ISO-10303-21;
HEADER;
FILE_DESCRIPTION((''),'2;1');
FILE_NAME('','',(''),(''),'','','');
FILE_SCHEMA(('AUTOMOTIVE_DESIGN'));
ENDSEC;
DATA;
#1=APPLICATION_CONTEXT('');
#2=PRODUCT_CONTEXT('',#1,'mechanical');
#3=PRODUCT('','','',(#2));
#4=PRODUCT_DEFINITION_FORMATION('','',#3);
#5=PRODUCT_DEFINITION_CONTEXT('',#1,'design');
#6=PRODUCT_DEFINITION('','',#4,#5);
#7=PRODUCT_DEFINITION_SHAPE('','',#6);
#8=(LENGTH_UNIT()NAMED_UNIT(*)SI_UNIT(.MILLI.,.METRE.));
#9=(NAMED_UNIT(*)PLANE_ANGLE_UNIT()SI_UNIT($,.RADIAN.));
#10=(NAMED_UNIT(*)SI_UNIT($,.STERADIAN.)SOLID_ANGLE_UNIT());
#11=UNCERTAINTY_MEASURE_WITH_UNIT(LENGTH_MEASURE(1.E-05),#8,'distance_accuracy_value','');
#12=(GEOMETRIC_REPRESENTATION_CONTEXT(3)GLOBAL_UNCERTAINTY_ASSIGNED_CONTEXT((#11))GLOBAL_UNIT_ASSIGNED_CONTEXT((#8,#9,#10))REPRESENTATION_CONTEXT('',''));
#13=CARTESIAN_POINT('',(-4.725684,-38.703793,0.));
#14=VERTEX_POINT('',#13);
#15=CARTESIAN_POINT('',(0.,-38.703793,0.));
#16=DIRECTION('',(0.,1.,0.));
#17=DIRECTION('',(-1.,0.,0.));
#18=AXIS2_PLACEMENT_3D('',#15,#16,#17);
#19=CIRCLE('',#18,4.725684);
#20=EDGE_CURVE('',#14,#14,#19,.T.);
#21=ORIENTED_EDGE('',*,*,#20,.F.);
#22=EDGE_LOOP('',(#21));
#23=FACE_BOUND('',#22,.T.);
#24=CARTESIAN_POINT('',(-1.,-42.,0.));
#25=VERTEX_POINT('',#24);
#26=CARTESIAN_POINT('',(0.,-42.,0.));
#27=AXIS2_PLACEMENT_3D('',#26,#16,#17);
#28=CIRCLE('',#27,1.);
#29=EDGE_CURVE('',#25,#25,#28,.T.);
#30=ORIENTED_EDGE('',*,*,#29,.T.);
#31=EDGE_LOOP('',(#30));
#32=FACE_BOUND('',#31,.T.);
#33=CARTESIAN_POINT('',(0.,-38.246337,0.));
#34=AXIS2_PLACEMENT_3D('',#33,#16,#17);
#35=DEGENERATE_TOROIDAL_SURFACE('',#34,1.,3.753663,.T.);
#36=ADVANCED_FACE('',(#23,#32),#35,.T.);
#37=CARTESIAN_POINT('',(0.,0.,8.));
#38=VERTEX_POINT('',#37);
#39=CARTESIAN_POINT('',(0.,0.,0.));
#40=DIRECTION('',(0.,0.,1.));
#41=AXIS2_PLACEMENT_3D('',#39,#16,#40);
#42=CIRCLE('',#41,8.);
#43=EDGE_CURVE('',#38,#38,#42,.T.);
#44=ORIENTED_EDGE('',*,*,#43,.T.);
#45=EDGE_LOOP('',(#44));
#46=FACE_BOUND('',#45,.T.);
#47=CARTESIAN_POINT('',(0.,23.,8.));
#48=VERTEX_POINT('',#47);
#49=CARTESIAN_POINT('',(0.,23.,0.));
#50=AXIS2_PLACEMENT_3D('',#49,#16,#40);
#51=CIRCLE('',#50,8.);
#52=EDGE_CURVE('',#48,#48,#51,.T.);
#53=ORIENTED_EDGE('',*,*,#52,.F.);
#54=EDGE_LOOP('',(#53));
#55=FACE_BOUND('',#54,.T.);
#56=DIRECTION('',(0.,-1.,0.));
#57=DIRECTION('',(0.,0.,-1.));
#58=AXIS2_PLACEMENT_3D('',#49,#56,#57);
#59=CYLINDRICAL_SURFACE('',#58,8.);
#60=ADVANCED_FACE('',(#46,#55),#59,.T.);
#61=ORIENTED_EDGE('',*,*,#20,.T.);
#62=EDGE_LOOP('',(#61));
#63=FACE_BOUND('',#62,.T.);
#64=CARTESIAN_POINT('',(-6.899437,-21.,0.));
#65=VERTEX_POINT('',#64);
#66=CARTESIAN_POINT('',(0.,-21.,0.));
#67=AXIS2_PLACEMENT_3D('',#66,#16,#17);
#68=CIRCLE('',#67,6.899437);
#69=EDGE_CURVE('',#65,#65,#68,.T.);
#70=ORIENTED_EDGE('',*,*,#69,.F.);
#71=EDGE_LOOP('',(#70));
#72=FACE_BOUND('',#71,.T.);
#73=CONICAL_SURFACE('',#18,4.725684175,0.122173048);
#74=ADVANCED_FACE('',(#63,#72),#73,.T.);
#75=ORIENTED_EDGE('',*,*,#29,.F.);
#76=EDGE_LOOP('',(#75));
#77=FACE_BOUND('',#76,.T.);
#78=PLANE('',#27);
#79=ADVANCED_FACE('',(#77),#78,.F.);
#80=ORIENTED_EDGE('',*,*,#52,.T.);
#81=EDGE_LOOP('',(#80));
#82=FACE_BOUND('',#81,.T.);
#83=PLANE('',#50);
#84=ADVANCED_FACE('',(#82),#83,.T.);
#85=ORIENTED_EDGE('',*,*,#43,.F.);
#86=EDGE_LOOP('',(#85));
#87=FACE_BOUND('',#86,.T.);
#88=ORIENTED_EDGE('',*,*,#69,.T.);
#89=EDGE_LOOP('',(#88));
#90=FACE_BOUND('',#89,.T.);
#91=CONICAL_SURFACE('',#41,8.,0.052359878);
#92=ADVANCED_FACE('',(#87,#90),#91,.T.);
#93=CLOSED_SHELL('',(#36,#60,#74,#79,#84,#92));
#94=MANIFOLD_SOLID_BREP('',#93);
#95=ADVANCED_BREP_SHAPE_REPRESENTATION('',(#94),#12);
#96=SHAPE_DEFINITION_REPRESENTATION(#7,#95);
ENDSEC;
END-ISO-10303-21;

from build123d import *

# Parameters (mm, degrees)
SKETCH_620_R    = 8
EXTRUDE_1_DEPTH = 23


# Read off the part's stored shape, not the designer's step: 凸台-拉伸2
with BuildPart() as part:
    # Sketch 620 → 凸台-拉伸1 (new body)
    with BuildSketch(Plane(origin=(0, 0, 0), x_dir=(1, 0, 0), z_dir=(0, 1, 0))):
        with Locations(Location((0, 0, 0), (0, 0, 270))):
            Circle(SKETCH_620_R)
    extrude(amount=EXTRUDE_1_DEPTH)

    # 凸台-拉伸2 outline → 凸台-拉伸2 (revolve)
    with BuildSketch(Plane.XY):
        Polygon((0, -21), (6.899436635, -21), (8, 0), (0, 0), align=None)
    revolve(axis=Axis((0, 0, 0), (0, 1, 0)))

    # 草图7 → 旋转4 (revolve)
    with BuildSketch(Plane.XY, mode=Mode.PRIVATE) as revolve_4_sk:
        with BuildLine():
            Line((0, -21), (6.899436635, -21))
            Line((6.899436635, -21), (4.725684175, -38.703793083))
            ThreePointArc((4.725684175, -38.703793083), (3.487252632, -41.057664274), (1, -42))
            Line((1, -42), (0, -42))
            Line((0, -42), (0, -21))
        make_face()
    revolve(revolve_4_sk.sketch.rotate(Axis((0, -21, 0), (0, -1, 0)), 180), axis=Axis((0, -21, 0), (0, -1, 0)))


solid = part.part
